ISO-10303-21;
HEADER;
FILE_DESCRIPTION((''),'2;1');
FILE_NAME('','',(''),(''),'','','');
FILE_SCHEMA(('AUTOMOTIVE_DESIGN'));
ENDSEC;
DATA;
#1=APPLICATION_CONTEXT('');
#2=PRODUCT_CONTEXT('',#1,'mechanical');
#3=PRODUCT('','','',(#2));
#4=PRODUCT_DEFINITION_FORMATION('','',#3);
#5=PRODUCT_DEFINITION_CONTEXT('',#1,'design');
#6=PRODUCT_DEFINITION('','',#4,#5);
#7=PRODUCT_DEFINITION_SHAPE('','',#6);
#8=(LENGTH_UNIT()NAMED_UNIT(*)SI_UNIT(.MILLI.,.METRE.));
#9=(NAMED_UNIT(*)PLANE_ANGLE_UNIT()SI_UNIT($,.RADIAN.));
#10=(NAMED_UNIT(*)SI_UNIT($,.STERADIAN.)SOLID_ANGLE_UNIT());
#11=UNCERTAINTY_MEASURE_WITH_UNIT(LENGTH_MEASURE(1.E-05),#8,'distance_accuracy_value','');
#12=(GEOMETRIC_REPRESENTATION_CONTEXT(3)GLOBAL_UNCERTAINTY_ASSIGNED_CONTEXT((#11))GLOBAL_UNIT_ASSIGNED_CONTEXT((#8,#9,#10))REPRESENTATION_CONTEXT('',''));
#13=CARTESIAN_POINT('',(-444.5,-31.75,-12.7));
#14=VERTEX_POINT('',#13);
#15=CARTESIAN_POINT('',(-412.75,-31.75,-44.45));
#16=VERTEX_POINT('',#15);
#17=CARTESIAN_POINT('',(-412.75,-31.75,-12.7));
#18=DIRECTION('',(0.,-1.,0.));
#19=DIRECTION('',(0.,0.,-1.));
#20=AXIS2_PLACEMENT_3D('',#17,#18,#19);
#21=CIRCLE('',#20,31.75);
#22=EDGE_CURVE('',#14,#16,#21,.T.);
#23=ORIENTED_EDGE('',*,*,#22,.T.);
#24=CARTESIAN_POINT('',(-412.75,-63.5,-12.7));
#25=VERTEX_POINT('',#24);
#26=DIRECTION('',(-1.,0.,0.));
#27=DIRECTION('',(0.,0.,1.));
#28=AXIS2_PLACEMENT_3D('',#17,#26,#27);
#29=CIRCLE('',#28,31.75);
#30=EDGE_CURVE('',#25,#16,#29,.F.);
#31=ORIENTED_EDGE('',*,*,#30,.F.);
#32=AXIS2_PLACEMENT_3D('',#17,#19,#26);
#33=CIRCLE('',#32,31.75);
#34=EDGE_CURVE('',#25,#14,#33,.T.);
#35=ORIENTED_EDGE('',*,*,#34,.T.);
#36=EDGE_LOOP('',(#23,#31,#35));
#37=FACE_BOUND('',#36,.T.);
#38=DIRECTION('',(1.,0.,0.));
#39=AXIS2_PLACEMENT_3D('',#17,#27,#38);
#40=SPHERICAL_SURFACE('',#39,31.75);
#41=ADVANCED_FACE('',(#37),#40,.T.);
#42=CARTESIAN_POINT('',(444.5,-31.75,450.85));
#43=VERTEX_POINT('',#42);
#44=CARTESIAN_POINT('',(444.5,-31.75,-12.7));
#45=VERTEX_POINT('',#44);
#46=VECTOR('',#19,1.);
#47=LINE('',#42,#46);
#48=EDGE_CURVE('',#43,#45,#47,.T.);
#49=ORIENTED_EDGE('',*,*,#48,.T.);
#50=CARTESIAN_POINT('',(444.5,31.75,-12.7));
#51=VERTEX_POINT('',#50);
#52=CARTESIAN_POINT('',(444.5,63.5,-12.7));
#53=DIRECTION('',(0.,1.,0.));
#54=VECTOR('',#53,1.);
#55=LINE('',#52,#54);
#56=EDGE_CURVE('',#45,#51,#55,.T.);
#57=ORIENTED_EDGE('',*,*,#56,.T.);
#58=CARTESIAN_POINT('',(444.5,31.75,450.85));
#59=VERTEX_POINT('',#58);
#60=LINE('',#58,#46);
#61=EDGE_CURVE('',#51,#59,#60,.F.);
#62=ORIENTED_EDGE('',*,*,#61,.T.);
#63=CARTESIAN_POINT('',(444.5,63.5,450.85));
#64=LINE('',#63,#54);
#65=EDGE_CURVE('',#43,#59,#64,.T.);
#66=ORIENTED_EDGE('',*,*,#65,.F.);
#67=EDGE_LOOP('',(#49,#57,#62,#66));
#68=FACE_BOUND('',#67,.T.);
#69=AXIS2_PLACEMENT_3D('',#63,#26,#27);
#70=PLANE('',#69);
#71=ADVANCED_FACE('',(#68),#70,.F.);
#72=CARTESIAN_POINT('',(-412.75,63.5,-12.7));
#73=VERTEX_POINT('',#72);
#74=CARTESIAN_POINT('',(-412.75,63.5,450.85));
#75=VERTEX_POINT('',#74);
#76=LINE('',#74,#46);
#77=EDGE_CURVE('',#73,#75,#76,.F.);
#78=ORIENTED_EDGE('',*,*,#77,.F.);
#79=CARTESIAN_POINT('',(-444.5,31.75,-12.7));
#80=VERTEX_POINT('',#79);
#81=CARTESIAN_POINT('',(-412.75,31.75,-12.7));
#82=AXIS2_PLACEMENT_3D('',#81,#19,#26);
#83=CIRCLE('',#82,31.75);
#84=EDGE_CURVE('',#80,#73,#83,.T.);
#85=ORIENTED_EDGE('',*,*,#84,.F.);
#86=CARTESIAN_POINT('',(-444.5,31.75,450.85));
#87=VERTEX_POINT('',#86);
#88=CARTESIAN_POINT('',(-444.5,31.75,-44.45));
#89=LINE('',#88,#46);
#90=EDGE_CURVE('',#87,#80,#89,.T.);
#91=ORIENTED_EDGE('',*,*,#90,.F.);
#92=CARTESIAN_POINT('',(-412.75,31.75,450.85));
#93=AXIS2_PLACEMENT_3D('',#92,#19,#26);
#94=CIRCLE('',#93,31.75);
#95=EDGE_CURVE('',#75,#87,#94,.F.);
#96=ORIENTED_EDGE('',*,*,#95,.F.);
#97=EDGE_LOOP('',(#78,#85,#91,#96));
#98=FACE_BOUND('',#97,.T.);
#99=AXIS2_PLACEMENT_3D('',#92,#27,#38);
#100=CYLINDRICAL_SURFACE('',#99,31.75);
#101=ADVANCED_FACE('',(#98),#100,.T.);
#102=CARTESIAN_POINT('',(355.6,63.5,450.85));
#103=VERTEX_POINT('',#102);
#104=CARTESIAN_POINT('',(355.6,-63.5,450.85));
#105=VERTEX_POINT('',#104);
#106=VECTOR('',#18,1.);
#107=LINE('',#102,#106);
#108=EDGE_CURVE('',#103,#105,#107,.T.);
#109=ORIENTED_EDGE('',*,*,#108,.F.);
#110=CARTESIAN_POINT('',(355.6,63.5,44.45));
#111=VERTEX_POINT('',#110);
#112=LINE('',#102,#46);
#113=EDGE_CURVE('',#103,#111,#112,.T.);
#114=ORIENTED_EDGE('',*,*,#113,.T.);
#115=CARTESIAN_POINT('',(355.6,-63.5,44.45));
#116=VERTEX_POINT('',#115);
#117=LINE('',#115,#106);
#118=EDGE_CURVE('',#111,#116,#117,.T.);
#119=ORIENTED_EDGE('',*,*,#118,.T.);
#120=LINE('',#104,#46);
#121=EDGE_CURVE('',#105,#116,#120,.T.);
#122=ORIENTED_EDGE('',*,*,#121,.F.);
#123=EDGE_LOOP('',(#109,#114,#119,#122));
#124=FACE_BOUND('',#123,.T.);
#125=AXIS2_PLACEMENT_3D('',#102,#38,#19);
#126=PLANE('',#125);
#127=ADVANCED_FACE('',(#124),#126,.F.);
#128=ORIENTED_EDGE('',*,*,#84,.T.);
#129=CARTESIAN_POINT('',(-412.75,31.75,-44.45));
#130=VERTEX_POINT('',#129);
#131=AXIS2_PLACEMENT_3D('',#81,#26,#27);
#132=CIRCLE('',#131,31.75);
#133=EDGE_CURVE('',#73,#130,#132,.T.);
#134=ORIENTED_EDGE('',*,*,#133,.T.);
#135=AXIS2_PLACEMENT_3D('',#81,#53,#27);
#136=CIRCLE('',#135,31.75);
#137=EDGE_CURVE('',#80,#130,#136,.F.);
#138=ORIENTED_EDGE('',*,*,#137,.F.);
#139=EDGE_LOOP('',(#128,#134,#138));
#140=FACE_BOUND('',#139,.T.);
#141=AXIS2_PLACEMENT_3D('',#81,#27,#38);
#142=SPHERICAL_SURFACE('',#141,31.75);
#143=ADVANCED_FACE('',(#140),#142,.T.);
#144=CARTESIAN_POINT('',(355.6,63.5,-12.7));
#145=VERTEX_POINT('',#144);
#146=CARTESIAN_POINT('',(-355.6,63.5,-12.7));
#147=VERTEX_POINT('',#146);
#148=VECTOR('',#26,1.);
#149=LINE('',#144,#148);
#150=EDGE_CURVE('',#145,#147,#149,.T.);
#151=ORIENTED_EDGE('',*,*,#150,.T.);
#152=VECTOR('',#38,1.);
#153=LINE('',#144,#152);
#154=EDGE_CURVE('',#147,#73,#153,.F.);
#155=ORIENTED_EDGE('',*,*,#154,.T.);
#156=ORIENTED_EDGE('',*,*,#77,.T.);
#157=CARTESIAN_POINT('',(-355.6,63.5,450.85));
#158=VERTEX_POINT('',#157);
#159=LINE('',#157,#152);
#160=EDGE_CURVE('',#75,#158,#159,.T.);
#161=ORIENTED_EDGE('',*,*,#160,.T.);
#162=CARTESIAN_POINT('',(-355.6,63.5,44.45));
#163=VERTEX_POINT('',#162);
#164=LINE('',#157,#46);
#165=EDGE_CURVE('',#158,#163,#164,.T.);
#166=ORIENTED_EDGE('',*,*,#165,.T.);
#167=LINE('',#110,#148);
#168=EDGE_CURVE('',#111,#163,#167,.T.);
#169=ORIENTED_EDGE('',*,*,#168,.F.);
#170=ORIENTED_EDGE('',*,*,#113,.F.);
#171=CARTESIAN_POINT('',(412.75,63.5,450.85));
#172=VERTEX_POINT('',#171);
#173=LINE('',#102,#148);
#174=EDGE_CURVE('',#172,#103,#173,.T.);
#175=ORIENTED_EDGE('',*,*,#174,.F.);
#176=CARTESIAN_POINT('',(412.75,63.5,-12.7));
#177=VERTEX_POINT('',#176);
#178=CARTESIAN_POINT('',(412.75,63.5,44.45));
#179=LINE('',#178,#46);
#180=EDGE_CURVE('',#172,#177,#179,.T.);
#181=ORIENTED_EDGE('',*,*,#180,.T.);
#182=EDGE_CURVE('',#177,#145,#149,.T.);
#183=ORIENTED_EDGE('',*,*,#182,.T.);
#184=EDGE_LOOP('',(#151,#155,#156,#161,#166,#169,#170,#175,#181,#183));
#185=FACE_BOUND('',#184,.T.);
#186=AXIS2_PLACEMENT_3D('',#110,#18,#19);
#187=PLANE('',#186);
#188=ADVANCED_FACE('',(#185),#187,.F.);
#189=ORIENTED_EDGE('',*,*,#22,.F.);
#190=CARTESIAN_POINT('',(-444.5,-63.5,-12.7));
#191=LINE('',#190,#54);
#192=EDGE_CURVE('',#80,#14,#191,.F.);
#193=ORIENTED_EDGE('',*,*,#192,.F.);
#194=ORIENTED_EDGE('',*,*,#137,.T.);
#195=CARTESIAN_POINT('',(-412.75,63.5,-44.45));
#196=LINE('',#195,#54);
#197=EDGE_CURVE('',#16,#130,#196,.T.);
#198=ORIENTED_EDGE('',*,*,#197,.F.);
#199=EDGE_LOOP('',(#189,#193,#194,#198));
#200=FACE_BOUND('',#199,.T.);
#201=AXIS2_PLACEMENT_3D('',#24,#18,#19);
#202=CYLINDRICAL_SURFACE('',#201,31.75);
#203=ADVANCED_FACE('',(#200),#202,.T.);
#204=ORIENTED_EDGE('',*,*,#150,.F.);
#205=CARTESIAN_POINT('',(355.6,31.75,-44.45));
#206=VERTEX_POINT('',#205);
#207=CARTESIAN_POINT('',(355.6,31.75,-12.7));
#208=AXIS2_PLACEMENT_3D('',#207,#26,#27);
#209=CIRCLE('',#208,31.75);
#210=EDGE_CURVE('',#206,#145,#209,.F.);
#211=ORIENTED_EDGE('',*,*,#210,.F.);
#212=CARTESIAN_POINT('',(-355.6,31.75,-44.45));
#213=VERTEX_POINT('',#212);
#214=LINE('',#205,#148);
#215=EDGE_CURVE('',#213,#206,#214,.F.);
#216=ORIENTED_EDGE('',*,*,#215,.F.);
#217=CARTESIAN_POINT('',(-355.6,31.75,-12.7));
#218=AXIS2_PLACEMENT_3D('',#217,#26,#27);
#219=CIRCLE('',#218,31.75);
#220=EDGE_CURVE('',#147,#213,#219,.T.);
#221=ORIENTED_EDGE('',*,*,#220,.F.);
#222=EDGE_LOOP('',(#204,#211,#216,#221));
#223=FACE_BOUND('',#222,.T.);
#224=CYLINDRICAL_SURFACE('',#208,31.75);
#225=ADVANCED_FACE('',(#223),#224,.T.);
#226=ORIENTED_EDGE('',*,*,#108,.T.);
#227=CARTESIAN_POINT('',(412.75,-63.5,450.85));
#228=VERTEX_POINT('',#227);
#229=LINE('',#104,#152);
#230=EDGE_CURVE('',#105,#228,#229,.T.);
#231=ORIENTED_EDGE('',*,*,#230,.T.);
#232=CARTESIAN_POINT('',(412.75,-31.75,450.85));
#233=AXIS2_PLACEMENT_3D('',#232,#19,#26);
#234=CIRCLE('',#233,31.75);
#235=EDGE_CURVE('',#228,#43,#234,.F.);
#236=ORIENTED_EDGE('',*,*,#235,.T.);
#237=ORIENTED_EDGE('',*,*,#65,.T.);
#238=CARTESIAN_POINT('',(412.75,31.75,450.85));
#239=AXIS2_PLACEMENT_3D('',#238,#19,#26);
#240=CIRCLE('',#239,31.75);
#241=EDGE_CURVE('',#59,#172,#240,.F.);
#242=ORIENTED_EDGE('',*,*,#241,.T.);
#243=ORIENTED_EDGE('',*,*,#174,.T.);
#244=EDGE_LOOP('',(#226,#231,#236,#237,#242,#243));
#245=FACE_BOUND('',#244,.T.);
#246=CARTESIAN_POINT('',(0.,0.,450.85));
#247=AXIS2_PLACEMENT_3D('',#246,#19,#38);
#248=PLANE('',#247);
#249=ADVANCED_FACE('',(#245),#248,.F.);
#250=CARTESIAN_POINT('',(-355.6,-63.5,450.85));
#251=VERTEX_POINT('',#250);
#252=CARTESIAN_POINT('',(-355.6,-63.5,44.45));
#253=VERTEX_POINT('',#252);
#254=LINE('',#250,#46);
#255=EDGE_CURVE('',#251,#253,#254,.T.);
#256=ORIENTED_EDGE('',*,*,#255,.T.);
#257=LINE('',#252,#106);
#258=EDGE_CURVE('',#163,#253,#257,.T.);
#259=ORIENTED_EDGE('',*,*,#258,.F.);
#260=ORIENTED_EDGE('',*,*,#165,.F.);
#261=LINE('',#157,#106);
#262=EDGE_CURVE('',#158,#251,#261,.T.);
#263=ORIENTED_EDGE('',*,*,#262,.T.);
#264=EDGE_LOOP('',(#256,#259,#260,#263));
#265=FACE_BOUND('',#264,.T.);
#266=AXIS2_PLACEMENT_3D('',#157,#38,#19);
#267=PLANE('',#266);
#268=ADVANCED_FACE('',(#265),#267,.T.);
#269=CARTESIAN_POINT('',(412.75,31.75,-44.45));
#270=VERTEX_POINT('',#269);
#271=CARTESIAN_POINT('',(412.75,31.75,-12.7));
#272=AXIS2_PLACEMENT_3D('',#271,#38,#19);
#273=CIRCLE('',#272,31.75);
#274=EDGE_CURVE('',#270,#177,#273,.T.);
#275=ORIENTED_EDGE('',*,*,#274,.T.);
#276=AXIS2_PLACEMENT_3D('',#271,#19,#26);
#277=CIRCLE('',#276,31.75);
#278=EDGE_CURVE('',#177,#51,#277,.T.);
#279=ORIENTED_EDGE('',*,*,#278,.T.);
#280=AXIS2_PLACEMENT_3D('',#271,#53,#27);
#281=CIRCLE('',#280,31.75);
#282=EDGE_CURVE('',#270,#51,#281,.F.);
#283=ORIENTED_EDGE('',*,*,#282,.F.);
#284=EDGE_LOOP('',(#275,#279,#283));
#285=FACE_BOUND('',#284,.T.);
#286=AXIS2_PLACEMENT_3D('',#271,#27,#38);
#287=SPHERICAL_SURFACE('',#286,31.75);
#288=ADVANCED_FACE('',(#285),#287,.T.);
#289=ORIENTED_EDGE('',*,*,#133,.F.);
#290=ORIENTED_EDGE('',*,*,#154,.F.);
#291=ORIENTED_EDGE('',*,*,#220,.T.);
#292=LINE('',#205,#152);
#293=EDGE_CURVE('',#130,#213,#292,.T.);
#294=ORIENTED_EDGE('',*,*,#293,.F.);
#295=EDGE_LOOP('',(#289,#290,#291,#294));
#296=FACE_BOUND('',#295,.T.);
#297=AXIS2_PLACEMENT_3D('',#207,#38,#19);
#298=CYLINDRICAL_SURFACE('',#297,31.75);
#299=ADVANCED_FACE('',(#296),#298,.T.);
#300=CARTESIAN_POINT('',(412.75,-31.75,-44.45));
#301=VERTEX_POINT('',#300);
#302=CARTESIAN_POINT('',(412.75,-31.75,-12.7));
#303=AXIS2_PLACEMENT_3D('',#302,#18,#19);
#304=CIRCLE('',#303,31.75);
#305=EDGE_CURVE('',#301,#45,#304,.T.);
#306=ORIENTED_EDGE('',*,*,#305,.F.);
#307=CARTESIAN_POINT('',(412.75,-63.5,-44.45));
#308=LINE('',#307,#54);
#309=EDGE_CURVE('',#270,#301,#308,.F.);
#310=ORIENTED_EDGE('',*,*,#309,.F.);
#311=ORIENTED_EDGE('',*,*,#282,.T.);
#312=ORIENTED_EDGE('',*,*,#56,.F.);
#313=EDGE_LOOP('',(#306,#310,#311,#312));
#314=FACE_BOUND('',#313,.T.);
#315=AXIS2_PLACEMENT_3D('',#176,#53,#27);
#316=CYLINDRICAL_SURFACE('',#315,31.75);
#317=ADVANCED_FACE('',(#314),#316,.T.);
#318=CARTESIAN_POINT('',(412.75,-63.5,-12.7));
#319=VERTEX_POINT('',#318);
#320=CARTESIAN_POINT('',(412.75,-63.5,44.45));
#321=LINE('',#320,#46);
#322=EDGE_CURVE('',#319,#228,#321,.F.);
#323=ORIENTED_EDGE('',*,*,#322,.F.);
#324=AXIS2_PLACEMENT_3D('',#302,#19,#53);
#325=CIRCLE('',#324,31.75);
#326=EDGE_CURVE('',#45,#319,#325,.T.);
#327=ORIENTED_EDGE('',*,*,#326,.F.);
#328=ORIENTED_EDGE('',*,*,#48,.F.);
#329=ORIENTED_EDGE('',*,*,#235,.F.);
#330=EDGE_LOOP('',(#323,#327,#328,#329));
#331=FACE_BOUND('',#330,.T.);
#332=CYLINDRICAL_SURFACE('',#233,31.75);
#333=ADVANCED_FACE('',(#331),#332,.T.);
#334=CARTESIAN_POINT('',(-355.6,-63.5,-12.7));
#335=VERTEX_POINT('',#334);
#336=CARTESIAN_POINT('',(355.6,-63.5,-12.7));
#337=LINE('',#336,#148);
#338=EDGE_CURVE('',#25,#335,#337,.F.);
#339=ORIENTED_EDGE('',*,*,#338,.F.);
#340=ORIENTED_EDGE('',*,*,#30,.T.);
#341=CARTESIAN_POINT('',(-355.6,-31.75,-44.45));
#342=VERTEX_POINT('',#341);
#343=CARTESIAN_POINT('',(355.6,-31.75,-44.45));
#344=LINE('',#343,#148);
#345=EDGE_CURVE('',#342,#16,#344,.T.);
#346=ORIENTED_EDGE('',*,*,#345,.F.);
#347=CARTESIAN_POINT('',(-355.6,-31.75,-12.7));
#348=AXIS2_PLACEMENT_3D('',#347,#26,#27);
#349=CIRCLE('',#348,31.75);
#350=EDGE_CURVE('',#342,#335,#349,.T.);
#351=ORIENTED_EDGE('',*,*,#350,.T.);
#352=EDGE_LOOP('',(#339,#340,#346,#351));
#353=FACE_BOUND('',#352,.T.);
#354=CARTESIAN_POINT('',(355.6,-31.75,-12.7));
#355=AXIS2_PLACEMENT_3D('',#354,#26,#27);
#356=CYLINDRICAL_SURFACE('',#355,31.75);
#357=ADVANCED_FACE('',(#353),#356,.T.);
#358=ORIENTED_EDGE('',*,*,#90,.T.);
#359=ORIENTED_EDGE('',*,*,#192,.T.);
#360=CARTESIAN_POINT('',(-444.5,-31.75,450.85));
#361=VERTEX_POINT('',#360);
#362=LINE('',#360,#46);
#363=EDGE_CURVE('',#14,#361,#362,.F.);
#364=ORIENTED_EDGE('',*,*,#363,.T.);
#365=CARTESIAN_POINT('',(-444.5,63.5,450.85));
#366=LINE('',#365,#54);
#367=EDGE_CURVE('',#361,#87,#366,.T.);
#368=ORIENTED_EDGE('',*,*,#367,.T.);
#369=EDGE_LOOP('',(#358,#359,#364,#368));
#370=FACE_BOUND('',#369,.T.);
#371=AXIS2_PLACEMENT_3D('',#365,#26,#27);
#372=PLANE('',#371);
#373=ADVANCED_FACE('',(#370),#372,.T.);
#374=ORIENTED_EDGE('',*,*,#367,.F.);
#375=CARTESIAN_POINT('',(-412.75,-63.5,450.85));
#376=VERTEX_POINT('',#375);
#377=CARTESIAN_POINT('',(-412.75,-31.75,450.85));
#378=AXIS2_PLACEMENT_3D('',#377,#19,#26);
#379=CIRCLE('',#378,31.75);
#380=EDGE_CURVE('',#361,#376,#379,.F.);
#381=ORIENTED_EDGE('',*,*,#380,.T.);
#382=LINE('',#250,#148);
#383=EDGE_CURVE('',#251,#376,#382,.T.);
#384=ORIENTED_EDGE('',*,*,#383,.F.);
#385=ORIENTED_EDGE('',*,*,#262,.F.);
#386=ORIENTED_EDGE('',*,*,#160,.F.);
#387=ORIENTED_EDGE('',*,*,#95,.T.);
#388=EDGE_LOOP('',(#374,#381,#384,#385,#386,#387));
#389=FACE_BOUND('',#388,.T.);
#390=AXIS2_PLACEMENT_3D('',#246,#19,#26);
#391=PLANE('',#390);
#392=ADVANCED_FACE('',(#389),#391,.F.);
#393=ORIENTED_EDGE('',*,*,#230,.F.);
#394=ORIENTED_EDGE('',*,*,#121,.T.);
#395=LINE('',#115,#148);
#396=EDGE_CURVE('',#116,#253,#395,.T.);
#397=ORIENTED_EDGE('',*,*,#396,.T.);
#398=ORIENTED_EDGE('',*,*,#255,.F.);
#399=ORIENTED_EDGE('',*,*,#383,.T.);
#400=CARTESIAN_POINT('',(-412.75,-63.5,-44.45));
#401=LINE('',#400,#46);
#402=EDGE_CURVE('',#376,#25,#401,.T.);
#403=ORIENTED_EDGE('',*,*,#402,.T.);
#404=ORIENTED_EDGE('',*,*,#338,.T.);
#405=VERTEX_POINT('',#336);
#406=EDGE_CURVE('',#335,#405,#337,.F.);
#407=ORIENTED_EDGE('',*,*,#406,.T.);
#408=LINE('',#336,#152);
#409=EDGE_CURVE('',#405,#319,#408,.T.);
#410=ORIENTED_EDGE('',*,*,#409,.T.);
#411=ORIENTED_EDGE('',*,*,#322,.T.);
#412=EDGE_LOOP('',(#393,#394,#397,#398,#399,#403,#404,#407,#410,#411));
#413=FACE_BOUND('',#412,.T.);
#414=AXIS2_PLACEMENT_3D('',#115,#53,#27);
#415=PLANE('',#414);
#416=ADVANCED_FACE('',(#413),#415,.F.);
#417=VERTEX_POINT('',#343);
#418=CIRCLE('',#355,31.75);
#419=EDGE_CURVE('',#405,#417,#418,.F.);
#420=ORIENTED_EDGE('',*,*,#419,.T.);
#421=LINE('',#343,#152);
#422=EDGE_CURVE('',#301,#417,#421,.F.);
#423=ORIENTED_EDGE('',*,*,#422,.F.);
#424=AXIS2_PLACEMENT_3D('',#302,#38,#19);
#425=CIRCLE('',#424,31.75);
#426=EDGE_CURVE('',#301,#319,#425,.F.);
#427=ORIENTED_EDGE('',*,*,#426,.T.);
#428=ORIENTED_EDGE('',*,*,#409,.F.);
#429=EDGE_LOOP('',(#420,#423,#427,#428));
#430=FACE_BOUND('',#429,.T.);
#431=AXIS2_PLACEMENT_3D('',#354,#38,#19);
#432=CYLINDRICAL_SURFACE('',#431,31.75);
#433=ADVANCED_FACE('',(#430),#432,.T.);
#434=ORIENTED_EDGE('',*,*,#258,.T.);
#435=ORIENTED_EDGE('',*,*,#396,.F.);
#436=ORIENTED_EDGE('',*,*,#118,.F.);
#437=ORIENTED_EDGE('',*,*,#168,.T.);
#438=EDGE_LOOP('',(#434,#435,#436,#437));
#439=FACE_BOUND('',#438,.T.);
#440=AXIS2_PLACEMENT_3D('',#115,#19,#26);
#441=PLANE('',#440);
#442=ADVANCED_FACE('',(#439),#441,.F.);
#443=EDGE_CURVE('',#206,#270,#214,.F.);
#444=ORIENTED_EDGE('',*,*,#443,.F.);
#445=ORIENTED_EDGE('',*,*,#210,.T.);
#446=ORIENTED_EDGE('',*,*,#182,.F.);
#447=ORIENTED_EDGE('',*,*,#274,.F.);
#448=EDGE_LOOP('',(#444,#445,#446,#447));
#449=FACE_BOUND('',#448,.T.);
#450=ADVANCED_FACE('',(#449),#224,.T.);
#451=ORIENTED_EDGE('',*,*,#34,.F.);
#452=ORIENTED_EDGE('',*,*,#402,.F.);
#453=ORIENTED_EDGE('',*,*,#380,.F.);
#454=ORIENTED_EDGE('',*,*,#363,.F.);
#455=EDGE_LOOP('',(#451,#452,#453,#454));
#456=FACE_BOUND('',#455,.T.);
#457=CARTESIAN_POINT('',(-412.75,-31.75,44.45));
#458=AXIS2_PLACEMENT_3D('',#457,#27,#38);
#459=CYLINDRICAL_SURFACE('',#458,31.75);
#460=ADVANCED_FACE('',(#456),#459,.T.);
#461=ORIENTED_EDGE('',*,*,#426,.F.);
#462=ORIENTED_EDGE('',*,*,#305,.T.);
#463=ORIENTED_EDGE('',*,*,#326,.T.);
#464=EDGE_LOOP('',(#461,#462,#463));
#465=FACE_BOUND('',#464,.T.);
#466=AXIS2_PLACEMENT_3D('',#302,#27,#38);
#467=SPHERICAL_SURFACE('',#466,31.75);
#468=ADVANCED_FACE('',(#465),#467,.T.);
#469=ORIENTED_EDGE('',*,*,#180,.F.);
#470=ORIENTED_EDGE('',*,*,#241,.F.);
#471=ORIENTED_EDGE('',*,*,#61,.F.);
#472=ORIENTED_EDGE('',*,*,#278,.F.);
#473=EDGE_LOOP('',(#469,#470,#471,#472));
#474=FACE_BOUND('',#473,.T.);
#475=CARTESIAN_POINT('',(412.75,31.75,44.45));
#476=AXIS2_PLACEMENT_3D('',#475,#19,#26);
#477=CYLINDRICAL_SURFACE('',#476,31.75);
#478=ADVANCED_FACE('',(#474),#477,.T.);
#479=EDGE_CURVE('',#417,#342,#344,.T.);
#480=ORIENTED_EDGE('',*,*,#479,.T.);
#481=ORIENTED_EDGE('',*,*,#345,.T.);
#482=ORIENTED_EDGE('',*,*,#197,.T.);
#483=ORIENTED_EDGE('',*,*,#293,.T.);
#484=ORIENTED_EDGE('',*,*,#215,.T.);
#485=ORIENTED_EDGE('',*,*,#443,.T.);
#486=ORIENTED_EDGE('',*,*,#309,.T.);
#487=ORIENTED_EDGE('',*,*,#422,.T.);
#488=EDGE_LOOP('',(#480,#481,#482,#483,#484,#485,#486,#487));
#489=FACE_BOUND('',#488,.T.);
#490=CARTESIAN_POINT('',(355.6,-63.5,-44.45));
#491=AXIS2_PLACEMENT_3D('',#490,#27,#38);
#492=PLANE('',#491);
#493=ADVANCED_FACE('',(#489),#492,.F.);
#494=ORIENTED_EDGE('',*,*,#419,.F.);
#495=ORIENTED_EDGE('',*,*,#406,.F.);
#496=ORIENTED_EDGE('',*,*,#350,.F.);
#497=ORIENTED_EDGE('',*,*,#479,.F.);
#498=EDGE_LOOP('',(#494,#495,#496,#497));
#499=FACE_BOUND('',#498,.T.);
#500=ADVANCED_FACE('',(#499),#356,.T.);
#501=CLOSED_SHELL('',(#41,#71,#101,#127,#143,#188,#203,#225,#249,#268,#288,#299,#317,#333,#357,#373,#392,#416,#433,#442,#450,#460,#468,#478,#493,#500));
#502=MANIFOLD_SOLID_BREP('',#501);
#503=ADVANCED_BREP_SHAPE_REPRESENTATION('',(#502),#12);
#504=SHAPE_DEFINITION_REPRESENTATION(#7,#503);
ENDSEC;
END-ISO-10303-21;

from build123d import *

# Parameters (mm, degrees)
SKETCH1_W           = 88.9
SKETCH1_H           = 127
BOSS_EXTRUDE1_DEPTH = 355.6
FILLET1_R           = 31.75
SKETCH3_W           = 88.9
SKETCH3_H           = 127
BOSS_EXTRUDE2_DEPTH = 495.3
FILLET2_R           = 31.75


# Read off the part's stored shape, not the designer's step: Mirror1
with BuildPart() as part:
    # Sketch1 → Boss-Extrude1 (new, symmetric)
    with BuildSketch(Plane(origin=(0, 0, 0), x_dir=(0, 0, -1), z_dir=(1, 0, 0))):
        Rectangle(SKETCH1_W, SKETCH1_H)
    extrude(amount=BOSS_EXTRUDE1_DEPTH, both=True)

    # Fillet1
    fillet1_edges = [part.edges().sort_by_distance(p)[0] for p in [
        (0, -63.5, -44.45),
        (0, 63.5, -44.45),
    ]]
    fillet(fillet1_edges, radius=FILLET1_R)

    # Sketch3 → Boss-Extrude2 (add)
    with BuildSketch(Plane(origin=(0, 0, -44.45), x_dir=(-1, 0, 0), z_dir=(0, 0, -1))):
        with Locations((400.05, 0)):
            Rectangle(SKETCH3_W, SKETCH3_H)
    extrude(amount=-BOSS_EXTRUDE2_DEPTH)

    # Fillet2
    fillet2_edges = [part.edges().sort_by_distance(p)[0] for p in [
        (-400.05, -63.5, -44.45),
        (-400.05, 63.5, -44.45),
        (-444.5, 0, -44.45),
        (-444.5, -63.5, 203.2),
        (-444.5, 63.5, 203.2),
    ]]
    fillet(fillet2_edges, radius=FILLET2_R)

    # Mirror1: part across plane


with BuildPart() as part_1:
    add(part.part)
    add(part.part.mirror(Plane(origin=(0, 0, 0), x_dir=(0, 0, 1), z_dir=(1, 0, 0))))


solid = part_1.part
